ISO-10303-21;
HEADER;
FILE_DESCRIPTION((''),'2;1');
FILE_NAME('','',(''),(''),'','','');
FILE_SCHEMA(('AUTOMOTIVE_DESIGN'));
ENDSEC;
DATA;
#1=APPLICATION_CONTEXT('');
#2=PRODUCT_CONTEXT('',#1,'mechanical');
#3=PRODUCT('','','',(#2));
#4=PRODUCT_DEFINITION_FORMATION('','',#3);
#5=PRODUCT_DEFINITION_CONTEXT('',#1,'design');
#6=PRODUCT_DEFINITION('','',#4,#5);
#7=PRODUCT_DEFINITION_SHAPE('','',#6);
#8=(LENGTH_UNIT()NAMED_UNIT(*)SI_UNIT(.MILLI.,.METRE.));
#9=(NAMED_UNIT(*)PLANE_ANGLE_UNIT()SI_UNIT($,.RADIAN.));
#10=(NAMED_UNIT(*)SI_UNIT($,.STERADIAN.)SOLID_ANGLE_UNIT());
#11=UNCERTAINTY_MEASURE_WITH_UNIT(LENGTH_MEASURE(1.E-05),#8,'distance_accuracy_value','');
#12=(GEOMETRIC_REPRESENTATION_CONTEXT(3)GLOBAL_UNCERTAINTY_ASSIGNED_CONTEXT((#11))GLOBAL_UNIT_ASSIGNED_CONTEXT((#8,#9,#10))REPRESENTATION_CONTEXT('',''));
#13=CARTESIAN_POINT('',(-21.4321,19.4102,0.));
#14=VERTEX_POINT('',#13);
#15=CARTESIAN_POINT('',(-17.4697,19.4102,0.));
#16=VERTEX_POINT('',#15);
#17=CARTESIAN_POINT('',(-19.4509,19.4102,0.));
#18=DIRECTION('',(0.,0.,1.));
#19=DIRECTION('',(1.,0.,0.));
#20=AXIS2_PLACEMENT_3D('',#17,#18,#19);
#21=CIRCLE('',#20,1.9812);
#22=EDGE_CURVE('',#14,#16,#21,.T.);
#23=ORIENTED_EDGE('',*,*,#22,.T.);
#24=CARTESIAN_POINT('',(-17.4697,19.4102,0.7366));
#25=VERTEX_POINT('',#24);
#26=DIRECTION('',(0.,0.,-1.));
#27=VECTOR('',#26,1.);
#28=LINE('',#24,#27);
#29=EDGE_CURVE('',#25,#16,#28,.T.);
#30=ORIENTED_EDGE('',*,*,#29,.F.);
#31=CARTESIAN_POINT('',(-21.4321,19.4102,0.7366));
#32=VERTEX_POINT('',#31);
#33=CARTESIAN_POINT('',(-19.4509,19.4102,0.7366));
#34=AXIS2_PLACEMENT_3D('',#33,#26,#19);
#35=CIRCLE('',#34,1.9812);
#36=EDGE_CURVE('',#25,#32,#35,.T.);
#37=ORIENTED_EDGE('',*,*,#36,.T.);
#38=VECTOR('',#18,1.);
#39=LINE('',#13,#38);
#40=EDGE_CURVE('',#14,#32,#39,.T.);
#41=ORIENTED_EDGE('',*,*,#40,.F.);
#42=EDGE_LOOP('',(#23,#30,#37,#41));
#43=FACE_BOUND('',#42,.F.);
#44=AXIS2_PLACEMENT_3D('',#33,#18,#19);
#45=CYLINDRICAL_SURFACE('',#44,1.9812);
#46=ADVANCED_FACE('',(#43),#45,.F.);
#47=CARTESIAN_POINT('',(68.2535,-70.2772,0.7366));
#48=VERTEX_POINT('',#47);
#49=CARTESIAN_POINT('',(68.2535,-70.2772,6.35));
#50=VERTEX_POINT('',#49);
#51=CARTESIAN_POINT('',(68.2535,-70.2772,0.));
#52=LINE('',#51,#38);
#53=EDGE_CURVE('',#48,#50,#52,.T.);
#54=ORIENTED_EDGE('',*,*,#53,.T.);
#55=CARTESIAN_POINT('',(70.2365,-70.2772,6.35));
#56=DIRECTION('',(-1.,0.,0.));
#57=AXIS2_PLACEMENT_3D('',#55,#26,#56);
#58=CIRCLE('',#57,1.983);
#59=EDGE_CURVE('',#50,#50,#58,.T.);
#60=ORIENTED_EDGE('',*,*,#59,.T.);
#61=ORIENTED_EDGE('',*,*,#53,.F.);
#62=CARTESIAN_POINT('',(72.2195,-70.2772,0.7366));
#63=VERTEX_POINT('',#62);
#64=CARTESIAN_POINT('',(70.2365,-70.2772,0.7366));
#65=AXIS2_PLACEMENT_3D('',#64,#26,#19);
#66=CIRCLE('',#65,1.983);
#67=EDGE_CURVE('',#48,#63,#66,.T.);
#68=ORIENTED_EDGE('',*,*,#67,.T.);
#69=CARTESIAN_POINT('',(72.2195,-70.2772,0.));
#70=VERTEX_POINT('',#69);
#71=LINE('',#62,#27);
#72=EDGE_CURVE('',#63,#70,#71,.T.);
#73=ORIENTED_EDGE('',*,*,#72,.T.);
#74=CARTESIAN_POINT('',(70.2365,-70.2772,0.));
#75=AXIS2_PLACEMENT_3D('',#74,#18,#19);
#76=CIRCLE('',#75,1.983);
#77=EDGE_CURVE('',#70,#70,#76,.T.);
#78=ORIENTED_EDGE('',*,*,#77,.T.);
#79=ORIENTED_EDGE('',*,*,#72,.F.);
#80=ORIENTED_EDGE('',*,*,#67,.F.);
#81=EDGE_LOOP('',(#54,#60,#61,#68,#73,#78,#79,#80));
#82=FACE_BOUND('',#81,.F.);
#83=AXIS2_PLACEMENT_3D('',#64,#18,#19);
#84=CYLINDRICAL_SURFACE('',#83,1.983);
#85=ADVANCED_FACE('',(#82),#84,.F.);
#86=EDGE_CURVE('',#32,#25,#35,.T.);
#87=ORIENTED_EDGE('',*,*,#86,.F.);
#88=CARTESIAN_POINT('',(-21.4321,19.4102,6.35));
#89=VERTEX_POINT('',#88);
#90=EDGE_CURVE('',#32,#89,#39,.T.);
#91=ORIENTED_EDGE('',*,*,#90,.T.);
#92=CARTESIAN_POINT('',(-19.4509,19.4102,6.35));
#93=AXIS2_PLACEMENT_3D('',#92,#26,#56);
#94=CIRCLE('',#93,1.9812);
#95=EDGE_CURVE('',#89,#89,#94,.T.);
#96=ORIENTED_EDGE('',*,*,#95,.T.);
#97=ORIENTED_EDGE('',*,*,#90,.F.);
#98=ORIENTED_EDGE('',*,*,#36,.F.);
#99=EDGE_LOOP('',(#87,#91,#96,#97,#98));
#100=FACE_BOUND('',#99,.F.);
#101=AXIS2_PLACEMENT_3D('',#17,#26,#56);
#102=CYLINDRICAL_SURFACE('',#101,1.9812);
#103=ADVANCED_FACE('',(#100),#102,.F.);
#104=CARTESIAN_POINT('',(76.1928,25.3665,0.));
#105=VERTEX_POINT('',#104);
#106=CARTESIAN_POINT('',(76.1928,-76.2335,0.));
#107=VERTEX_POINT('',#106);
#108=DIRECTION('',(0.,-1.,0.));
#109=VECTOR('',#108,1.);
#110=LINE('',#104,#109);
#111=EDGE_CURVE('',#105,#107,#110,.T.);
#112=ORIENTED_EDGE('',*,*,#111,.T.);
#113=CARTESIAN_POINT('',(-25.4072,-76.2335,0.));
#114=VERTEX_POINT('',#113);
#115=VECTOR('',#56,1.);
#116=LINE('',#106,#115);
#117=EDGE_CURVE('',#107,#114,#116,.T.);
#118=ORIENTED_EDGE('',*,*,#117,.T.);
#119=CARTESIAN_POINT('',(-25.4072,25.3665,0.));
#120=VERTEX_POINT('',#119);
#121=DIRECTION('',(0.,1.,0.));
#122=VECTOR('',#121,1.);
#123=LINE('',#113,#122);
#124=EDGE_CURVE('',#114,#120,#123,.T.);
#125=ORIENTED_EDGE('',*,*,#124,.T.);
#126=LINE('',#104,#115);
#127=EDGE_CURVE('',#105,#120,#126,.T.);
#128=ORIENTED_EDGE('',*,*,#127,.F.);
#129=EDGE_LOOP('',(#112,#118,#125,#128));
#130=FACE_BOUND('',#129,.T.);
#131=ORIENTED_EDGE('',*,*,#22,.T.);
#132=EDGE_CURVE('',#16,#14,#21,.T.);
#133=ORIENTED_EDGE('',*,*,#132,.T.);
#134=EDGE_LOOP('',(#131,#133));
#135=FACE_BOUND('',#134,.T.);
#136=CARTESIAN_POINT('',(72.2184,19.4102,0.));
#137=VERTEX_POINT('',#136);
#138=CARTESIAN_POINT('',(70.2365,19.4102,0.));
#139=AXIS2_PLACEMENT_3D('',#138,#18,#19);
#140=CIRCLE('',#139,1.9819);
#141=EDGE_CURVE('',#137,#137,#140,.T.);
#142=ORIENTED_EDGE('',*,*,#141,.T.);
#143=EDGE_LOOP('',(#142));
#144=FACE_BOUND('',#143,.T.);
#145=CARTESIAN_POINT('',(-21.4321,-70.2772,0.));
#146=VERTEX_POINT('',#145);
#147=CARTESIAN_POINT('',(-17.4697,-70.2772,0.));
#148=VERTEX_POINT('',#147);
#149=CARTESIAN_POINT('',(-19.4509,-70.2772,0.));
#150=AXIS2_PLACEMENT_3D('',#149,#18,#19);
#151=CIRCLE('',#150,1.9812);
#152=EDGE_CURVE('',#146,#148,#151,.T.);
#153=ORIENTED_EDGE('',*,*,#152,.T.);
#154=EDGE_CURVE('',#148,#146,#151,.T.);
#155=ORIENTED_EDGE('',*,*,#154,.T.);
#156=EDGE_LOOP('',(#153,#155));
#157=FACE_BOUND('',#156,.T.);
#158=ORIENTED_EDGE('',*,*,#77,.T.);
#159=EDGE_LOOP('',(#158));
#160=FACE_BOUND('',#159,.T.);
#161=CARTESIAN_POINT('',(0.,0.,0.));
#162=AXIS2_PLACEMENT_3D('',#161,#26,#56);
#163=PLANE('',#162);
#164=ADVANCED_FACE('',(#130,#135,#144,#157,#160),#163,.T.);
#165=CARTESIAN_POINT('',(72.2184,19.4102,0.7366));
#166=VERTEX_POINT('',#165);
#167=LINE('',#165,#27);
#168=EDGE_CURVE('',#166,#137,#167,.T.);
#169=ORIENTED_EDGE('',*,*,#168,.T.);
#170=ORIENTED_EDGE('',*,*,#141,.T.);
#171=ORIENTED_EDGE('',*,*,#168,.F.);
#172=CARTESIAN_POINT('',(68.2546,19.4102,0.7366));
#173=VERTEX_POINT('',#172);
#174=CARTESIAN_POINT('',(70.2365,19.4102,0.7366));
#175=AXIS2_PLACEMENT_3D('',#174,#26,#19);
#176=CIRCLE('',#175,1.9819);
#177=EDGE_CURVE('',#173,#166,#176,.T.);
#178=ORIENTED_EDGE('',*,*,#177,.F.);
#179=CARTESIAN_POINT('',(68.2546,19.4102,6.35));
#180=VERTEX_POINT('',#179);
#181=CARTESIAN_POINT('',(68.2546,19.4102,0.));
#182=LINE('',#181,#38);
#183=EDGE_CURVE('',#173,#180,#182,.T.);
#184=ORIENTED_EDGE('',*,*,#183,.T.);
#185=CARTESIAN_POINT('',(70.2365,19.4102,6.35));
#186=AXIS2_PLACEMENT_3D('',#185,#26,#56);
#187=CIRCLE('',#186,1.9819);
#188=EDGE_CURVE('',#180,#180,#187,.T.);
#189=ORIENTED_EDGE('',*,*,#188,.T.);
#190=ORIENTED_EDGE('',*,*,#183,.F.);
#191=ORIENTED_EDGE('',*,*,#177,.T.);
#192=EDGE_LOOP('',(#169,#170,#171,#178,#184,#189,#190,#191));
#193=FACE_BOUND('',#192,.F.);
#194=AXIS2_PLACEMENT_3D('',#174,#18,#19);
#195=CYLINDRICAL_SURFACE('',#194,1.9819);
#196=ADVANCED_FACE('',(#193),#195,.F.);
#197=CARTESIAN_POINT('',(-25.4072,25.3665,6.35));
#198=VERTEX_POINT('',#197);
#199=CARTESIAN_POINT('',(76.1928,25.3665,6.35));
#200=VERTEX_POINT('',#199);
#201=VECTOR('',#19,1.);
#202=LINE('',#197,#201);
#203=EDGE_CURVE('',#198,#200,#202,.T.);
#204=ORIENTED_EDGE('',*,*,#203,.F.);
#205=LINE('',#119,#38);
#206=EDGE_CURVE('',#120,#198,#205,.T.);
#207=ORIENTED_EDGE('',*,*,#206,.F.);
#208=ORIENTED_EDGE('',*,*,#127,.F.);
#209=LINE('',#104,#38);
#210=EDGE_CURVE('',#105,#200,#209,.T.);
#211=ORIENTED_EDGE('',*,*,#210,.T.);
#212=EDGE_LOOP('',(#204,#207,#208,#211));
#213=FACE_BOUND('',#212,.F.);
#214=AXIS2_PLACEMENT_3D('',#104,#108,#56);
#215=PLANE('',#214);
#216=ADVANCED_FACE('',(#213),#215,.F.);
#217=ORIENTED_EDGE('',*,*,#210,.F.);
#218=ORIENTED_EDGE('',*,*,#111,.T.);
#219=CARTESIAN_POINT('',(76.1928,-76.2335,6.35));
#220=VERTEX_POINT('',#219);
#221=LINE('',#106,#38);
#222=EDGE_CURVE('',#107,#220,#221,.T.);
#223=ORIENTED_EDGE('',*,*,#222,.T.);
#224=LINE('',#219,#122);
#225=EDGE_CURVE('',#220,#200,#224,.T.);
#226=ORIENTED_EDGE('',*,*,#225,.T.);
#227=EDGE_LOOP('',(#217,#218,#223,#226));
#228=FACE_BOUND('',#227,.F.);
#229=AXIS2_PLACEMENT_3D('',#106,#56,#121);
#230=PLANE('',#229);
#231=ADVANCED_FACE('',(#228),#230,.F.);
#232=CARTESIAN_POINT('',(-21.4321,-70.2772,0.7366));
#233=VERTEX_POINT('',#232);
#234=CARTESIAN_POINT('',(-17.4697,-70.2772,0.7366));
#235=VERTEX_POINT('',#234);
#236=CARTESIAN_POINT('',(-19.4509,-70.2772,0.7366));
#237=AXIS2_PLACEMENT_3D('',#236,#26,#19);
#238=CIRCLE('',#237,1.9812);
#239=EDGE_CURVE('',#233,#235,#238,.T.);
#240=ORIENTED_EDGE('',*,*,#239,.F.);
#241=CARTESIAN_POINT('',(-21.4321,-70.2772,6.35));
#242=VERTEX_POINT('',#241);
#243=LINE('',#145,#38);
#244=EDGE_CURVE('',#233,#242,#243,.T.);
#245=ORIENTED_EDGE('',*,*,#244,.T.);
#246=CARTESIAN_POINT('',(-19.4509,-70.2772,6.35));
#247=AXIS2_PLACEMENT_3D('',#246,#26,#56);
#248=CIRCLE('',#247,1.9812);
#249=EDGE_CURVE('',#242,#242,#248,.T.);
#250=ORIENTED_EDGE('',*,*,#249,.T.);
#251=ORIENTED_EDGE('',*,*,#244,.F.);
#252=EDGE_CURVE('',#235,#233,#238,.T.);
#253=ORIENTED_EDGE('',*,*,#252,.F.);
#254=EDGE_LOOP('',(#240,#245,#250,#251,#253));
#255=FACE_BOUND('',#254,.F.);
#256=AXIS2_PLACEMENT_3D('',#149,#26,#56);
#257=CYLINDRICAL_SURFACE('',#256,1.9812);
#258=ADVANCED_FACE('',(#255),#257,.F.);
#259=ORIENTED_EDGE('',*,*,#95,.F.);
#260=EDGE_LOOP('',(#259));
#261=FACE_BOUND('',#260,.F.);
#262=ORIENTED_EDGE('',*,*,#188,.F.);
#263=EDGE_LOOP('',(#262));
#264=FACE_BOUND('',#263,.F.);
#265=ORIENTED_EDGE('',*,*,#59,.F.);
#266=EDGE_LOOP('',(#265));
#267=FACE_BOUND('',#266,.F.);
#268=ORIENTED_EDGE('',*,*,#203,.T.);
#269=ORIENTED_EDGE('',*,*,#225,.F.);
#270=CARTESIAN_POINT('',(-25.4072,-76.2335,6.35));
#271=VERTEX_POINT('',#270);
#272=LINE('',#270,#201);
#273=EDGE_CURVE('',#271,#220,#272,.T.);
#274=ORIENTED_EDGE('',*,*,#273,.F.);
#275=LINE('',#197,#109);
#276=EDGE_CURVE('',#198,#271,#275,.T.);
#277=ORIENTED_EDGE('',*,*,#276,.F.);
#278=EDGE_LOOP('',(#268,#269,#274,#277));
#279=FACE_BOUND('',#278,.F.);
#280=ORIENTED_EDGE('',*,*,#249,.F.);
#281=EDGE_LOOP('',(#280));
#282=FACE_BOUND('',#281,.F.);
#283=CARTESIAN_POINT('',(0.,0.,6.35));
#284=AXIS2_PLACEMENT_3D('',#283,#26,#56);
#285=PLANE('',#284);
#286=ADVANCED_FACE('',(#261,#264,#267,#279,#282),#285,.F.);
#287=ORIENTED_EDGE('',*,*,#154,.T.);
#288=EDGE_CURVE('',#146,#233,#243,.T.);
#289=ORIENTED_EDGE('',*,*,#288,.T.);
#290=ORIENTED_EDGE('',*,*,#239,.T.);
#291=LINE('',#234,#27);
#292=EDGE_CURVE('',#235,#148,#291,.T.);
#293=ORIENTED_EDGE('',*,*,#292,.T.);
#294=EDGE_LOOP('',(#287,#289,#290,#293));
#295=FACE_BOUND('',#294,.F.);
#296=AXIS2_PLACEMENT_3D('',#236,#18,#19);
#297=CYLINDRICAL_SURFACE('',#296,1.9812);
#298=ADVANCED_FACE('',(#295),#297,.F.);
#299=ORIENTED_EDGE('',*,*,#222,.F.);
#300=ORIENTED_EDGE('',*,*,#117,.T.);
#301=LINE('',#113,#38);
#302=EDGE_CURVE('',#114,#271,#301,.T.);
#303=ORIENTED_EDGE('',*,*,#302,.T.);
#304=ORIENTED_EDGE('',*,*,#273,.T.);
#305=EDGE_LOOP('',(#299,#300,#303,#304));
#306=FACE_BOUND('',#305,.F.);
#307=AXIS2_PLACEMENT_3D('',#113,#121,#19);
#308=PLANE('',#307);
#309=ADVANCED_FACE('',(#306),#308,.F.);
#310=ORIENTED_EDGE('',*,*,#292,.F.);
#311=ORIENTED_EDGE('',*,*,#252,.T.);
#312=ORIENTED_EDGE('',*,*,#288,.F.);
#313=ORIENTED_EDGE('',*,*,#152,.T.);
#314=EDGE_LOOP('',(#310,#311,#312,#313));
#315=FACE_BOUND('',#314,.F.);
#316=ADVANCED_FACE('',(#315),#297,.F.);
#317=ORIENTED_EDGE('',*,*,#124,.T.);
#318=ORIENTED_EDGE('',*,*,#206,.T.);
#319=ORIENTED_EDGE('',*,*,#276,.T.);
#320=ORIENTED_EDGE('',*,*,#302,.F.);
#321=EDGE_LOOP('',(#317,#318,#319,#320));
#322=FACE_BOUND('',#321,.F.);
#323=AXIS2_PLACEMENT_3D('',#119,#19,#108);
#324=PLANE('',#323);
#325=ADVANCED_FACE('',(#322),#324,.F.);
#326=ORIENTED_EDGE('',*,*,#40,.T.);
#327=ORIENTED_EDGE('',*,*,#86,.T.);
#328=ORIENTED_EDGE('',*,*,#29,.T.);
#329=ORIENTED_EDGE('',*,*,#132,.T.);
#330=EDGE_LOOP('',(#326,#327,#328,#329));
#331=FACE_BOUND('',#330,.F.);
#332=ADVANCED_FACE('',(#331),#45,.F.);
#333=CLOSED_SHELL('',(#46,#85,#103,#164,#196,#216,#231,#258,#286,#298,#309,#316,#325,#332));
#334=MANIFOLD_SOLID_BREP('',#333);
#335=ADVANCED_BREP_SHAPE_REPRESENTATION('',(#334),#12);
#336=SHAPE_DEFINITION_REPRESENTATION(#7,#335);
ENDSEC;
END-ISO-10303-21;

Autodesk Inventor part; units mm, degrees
ref_plane "YZ Plane" through (0, 0, 0) normal (1, 0, 0) x (0, 1, 0)
ref_plane "XZ Plane" through (0, 0, 0) normal (0, 1, 0) x (-1, 0, 0)
ref_plane "XY Plane" through (0, 0, 0) normal (0, 0, 1) x (1, 0, 0)
sketch "Sketch1" plane through (0, 0, 0) normal (0, 0, 1) x (1, 0, 0)
  line L0 (-25.4072, 25.3665) -> (76.1928, 25.3665)
  line L1 (76.1928, 25.3665) -> (76.1928, -76.2335)
  line L2 (76.1928, -76.2335) -> (-25.4072, -76.2335)
  line L3 (-25.4072, -76.2335) -> (-25.4072, 25.3665)
  point P0 (0, 0)
  dimension "d0" = 101.6
  dimension "d1" = 101.6
extrude "Extrusion1" add sketch "Sketch1" along normal blind 0.7366
sketch "Sketch2" plane through (0, 0, 0.7366) normal (0, 0, 1) x (1, 0, 0)
  line L0 (-25.4072, 25.3665) -> (76.1928, -76.2335)
  line L1 (76.1928, 25.3665) -> (-25.4072, -76.2335)
  circle A0 centre (25.3928, -25.4335) radius 27.432
  point P0 (0, 0)
  dimension "d4" = 54.864
extrude "Extrusion2" cut sketch "Sketch2" against normal blind 0.7366
sketch "Sketch3" plane through (0, 0, 0.7366) normal (0, 0, 1) x (1, 0, 0)
  line L0 (-25.4072, -76.2335) -> (-25.4072, 25.3665) projected
  line L1 (-25.4072, 25.3665) -> (-25.4072, -25.4335)
  line L2 (-25.4072, -25.4335) -> (-25.4072, 19.4102)
  line L3 (-25.4072, 25.3665) -> (76.1928, -76.2335)
  line L4 (76.1928, 25.3665) -> (-25.4072, -76.2335)
  circle A0 centre (-19.4509, 19.4102) radius 1.9812
  point P0 (0, 0)
  dimension "d7" = 44.8437
  dimension "d8" = 3.9624
extrude "Extrusion3" cut sketch "Sketch3" against normal blind 0.7366 contours A0 L3 | L3 A0
sketch "Sketch4" plane through (0, 0, 0.7366) normal (0, 0, 1) x (1, 0, 0)
  line L0 (-25.4072, -76.2335) -> (76.1928, 25.3665)
  line L1 (-25.4072, 25.3665) -> (76.1928, -76.2335)
  circle A0 centre (70.2365, 19.4102) radius 1.9819
  circle A1 centre (70.2365, -70.2772) radius 1.983
  circle A2 centre (-19.4509, -70.2772) radius 1.9812
  point P0 (0, 0)
extrude "Extrusion4" cut sketch "Sketch4" against normal blind 0.7366
sketch "Sketch5" plane through (0, 0, 0.7366) normal (0, 0, 1) x (1, 0, 0)
  circle A0 centre (25.3928, -25.4335) radius 27.432 projected
  circle A1 centre (25.3928, -25.4335) radius 29.972
  circle A2 centre (25.3928, -25.4335) radius 32.512
  point P0 (0, 0)
  dimension "d13" = 59.944
  dimension "d14" = 65.024
extrude "Extrusion5" add sketch "Sketch5" along normal blind 6.6548 contours A2
fillet "Fillet1" radius 3.175 4 edges at (-25.4072, 25.3665, 0.3683) (76.1928, 25.3665, 0.3683) (76.1928, -76.2335, 0.3683) (-25.4072, -76.2335, 0.3683)
sketch "Sketch6" plane through (0, 0, 0) normal (0, 0, -1) x (-1, 0, 0)
  circle A0 centre (-70.2365, 19.4102) radius 1.9819 projected
  circle A1 centre (19.4509, -70.2772) radius 1.9812 projected
  circle A2 centre (-70.2365, -70.2772) radius 1.983 projected
  circle A3 centre (19.4509, 19.4102) radius 1.9812 projected
  line L0 (-76.1928, 25.3665) -> (25.4072, 25.3665)
  line L1 (25.4072, 25.3665) -> (25.4072, -76.2335)
  line L2 (25.4072, -76.2335) -> (-76.1928, -76.2335)
  line L3 (-76.1928, -76.2335) -> (-76.1928, 25.3665)
  point P0 (0, 0)
extrude "Extrusion6" add sketch "Sketch6" against normal blind 6.35
sketch "Sketch7" plane through (0, 0, 6.35) normal (0, 0, 1) x (1, 0, 0)
  line L0 (-14.3145, 13.5707) -> (65.0173, 13.5707)
  line L1 (65.0173, 13.5707) -> (65.0173, -65.16)
  line L2 (65.0173, -65.16) -> (-14.3145, -65.16)
  line L3 (-14.3145, -65.16) -> (-14.3145, 13.5707)
  point P0 (0, 0)
extrude "Extrusion7" cut sketch "Sketch7" along normal blind 6.35
sketch "Sketch8" plane through (0, 0, 6.35) normal (0, 0, 1) x (1, 0, 0)
  circle A0 centre (70.2365, -70.2772) radius 1.983 projected
  circle A1 centre (-19.4509, 19.4102) radius 1.9812 projected
  line L0 (-19.4509, 19.4102) -> (70.2365, 19.4102)
  line L1 (70.2365, 19.4102) -> (70.2365, -70.2772)
  line L2 (70.2365, -70.2772) -> (-19.4509, -70.2772)
  line L3 (-19.4509, -70.2772) -> (-19.4509, 19.4102)
  line L4 (63.8865, 13.0602) -> (-13.1009, 13.0602)
  line L5 (-13.1009, 13.0602) -> (-13.1009, -63.9272)
  line L6 (-13.1009, -63.9272) -> (63.8865, -63.9272)
  line L7 (63.8865, -63.9272) -> (63.8865, 13.0602)
  line L8 (-13.1009, -25.4335) -> (-13.1009, -19.0835)
  line L9 (-13.1009, -19.0835) -> (63.8865, -19.0835)
  line L10 (63.8865, -19.0835) -> (63.8865, -31.7835)
  line L11 (63.8865, -31.7835) -> (-13.1009, -31.7835)
  point P0 (0, 0)
  dimension "d22" = 6.35
  dimension "d23" = 6.35
  dimension "d24" = 12.7
extrude "Extrusion8" cut sketch "Sketch8" against normal blind 25.4 contours L7 L9 L5 L4 | L7 L6 L5 L11
sketch "Sketch9" plane through (0, 0, 6.35) normal (0, 0, 1) x (1, 0, 0)
  line L0 (63.8865, -63.9272) -> (-13.1009, -63.9272) projected
  line L1 (-13.1009, 13.0602) -> (63.8865, 13.0602) projected
  line L2 (-25.4072, 25.3665) -> (76.1928, 25.3665) projected
  line L3 (76.1928, -76.2335) -> (-25.4072, -76.2335) projected
  line L4 (-13.1009, 13.0602) -> (-13.1009, 25.3665)
  line L5 (63.8865, 13.0602) -> (63.8865, 25.3665)
  line L6 (63.8865, -63.9272) -> (63.8865, -76.2335)
  line L7 (-13.1009, -63.9272) -> (-13.1009, -76.2335)
  point P0 (0, 0)
extrude "Extrusion9" cut sketch "Sketch9" against normal blind 25.4
sketch "Sketch10" plane through (0, 0, 6.35) normal (0, 0, 1) x (1, 0, 0)
  line L0 (63.8865, 25.3665) -> (63.8865, -19.0835) projected
  line L1 (63.8865, -19.0835) -> (-13.1009, -19.0835) projected
  line L2 (-13.1009, -19.0835) -> (-13.1009, 25.3665) projected
  line L3 (-13.1009, -76.2335) -> (-13.1009, -31.7835) projected
  line L4 (-13.1009, -31.7835) -> (63.8865, -31.7835) projected
  line L5 (63.8865, -31.7835) -> (63.8865, -76.2335) projected
  line L6 (63.8865, 25.3665) -> (76.1928, 25.3665) projected
  line L7 (-13.1009, 25.3665) -> (63.8865, 25.3665)
  line L8 (-13.1009, -76.2335) -> (63.8865, -76.2335)
  point P0 (0, 0)
extrude "Extrusion10" add sketch "Sketch10" against normal blind 6.35
properties part number "tb"
